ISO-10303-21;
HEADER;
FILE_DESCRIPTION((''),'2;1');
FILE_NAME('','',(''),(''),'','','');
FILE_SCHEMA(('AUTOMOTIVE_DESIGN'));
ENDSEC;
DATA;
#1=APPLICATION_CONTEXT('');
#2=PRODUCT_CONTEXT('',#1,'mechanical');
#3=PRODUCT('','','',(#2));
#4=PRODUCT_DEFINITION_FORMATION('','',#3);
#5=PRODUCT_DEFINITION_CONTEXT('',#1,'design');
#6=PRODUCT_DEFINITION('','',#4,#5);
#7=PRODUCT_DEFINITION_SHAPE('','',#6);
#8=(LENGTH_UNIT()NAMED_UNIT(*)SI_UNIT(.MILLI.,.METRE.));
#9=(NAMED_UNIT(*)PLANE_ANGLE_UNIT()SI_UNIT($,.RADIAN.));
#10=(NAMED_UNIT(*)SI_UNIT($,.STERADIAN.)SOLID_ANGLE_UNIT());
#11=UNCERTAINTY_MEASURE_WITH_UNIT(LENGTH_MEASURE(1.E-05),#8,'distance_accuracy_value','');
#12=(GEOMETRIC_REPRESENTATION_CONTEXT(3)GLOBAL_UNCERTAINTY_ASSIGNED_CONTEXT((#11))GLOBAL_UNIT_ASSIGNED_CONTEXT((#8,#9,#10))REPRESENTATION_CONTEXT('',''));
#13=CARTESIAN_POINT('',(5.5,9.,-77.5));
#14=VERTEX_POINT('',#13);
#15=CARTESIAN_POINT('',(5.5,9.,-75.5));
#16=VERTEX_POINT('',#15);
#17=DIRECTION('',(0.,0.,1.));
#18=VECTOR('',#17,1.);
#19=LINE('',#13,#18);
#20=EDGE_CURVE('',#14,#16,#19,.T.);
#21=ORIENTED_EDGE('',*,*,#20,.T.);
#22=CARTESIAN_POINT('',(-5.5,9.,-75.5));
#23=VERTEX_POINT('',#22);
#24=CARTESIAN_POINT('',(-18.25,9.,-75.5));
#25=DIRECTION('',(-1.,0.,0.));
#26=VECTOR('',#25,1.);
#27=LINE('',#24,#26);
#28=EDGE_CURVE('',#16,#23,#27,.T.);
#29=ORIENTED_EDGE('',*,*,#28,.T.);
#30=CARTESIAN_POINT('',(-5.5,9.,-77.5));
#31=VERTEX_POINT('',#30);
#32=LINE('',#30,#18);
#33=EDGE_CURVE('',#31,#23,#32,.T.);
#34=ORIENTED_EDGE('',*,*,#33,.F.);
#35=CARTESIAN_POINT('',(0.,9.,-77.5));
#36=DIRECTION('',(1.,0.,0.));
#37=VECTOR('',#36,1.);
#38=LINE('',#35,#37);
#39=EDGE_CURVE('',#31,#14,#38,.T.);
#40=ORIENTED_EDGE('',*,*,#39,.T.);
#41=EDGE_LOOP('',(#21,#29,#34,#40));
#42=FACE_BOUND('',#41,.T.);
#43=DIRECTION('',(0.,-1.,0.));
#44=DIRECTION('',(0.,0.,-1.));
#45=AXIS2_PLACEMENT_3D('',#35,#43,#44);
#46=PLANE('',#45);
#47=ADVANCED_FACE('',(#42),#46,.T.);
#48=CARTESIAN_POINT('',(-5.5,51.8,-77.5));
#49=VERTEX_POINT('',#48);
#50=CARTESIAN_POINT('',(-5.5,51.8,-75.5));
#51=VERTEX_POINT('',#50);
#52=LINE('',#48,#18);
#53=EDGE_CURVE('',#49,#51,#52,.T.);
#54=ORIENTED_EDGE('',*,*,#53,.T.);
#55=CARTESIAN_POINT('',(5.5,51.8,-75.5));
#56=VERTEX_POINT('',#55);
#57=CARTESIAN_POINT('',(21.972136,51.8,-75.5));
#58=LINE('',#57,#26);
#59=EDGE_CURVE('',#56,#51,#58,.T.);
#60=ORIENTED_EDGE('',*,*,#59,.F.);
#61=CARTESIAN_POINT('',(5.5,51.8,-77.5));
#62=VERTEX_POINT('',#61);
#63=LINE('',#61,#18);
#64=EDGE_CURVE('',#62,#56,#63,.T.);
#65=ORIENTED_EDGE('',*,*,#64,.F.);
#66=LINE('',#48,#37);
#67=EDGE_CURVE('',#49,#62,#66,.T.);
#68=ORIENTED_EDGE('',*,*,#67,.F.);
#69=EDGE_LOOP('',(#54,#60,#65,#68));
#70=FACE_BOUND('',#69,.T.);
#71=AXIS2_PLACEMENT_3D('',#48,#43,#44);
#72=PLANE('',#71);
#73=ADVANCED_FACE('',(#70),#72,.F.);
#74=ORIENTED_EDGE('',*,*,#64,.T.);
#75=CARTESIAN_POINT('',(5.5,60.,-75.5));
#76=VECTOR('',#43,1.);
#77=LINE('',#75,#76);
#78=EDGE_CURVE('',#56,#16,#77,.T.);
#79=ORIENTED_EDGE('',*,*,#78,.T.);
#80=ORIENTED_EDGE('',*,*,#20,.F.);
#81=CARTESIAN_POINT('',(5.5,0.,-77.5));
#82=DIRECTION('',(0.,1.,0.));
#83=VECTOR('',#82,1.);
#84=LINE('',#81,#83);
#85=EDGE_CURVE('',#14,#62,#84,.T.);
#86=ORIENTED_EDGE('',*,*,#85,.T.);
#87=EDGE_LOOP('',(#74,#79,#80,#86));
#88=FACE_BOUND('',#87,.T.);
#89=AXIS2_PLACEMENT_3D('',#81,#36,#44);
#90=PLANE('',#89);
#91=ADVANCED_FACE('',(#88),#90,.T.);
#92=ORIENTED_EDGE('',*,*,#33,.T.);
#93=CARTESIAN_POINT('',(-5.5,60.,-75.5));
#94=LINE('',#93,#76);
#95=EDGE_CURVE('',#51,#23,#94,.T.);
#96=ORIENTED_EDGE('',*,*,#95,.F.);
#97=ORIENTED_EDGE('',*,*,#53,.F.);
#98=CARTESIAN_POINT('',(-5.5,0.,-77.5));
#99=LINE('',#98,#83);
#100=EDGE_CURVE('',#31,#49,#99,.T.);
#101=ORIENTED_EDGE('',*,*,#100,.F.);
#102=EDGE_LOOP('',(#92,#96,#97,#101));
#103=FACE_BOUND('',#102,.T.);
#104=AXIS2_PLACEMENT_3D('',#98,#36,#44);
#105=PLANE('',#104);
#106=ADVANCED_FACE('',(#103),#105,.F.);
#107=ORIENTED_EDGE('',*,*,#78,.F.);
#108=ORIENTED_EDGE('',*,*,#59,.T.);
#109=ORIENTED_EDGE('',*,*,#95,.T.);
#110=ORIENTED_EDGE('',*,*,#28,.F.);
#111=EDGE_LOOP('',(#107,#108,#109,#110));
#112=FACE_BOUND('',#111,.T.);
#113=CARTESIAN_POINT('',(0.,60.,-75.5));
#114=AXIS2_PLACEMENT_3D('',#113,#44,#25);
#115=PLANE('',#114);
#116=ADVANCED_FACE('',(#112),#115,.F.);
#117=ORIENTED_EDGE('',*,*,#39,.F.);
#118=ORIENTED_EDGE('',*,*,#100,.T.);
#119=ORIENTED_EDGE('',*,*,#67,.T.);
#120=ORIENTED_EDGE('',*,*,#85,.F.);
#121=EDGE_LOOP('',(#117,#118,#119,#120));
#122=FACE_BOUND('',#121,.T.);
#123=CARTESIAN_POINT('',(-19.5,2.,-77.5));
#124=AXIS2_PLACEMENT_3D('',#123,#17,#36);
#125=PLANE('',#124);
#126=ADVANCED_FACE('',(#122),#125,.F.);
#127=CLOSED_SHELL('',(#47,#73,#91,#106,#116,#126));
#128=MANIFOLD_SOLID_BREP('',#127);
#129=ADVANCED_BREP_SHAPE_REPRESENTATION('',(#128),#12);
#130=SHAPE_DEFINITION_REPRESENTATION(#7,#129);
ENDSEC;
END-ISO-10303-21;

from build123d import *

# Parameters (mm, degrees)
SKETCH1_W                       = 39
SKETCH1_H                       = 155
BOSS_EXTRUDE1_DEPTH             = 2
BOSS_EXTRUDE2_DEPTH             = 58
SKETCH3_W                       = 2
SKETCH3_H                       = 2
BOSS_EXTRUDE3_DEPTH             = 58
SKETCH4_W                       = 2
SKETCH4_H                       = 2
BOSS_EXTRUDE4_DEPTH             = 151
SKETCH6_W                       = 35
SKETCH6_H                       = 2.2
CUT_EXTRUDE1_DEPTH              = 166.496978824
SKETCH7_W                       = 35
SKETCH7_H                       = 2.2
CUT_EXTRUDE2_DEPTH              = 99.744620107
SKETCH5_W                       = 31
SKETCH5_H                       = 2
BOSS_EXTRUDE5_DEPTH             = 2
BOSS_EXTRUDE6_REACH             = 101.932
SKETCH8_W                       = 2
SKETCH8_H                       = 2
BOSS_EXTRUDE6_DIRECTION_2_REACH = 101.932
SKETCH10_W                      = 2
SKETCH10_H                      = 2.2
SKETCH10_W_2                    = 2.2
SKETCH10_H_2                    = 2
BOSS_EXTRUDE8_DEPTH             = 2
SKETCH11_W                      = 2
SKETCH11_H                      = 2.2
SKETCH11_W_2                    = 2.2
SKETCH11_H_2                    = 2
BOSS_EXTRUDE9_DEPTH             = 2
FILLET2_R                       = 2.5
SKETCH14_W                      = 36.5
SKETCH14_H                      = 7.75
BOSS_EXTRUDE10_DEPTH            = 2
SKETCH13_W                      = 31
SKETCH13_H                      = 3
CUT_EXTRUDE4_DEPTH              = 2
FILLET3_R                       = 2
FILLET4_R                       = 0.5
SKETCH15_R                      = 5.1
CUT_EXTRUDE5_DEPTH              = 100.932477203
SKETCH16_R                      = 7.1
BOSS_EXTRUDE11_DEPTH            = 1
FILLET5_R                       = 0.5
FILLET7_R                       = 0.5
CUT_EXTRUDE6_DEPTH              = 100.932477263
CUT_EXTRUDE6_DEPTH_BACK         = 100.932477263
SKETCH18_W                      = 9
SKETCH18_H                      = 51
CUT_EXTRUDE7_DEPTH              = 100.078251902
CUT_EXTRUDE8_DEPTH              = 61.284741021
CUT_EXTRUDE8_DEPTH_BACK         = 61.284741021
SKETCH19_W                      = 11
SKETCH19_H                      = 8.2


with BuildPart() as part:
    # Sketch1 → Boss-Extrude1 (new body)
    with BuildSketch(Plane(origin=(0, 0, 0), x_dir=(1, 0, 0), z_dir=(0, 1, 0))):
        Rectangle(SKETCH1_W, SKETCH1_H)
    extrude(amount=BOSS_EXTRUDE1_DEPTH)

    # Sketch2 → Boss-Extrude2 (add)
    with BuildSketch(Plane(origin=(0, 2, 0), x_dir=(1, 0, 0), z_dir=(0, 1, 0))):
        Polygon((-17.5, -77.5), (-17.5, -75.5), (-17.5, 75.5), (17.5, 75.5), (17.5, -75.5), (17.5, -77.5), (19.5, -77.5), (19.5, 77.5), (-19.5, 77.5), (-19.5, -77.5), align=None)
    extrude(amount=BOSS_EXTRUDE2_DEPTH)

    # Sketch3 → Boss-Extrude3 (add)
    with BuildSketch(Plane(origin=(0, 2, 0), x_dir=(1, 0, 0), z_dir=(0, 1, 0))):
        with Locations((-16.5, -76.5)):
            Rectangle(SKETCH3_W, SKETCH3_H)
        with Locations((-16.5, -72.3)):
            Rectangle(SKETCH3_W, SKETCH3_H)
        with Locations((16.5, -76.5)):
            Rectangle(SKETCH3_W, SKETCH3_H)
        with Locations((16.5, -72.3)):
            Rectangle(SKETCH3_W, SKETCH3_H)
    extrude(amount=BOSS_EXTRUDE3_DEPTH)

    # Sketch4 → Boss-Extrude4 (add)
    with BuildSketch(Plane.XY.offset(-75.5)):
        with Locations((-16.5, 59)):
            Rectangle(SKETCH4_W, SKETCH4_H)
        Polygon((-15.5, 53.8), (-17.5, 51.8), (-17.5, 55.8), (-15.5, 55.8), align=None)
        Polygon((15.5, 55.8), (17.5, 55.8), (17.5, 51.8), (15.5, 53.8), align=None)
        with Locations((16.5, 59)):
            Rectangle(SKETCH4_W, SKETCH4_H)
    extrude(amount=BOSS_EXTRUDE4_DEPTH)

    # Sketch6 → Cut-Extrude1 (cut, through all)
    with BuildSketch(Plane.XY.offset(-75.5)):
        with Locations((0, 56.9)):
            Rectangle(SKETCH6_W, SKETCH6_H)
    extrude(amount=CUT_EXTRUDE1_DEPTH, mode=Mode.SUBTRACT)

    # Sketch7 → Cut-Extrude2 (cut, through all)
    with BuildSketch(Plane(origin=(0, 2, 0), x_dir=(1, 0, 0), z_dir=(0, 1, 0))):
        with Locations((0, -74.4)):
            Rectangle(SKETCH7_W, SKETCH7_H)
    extrude(amount=CUT_EXTRUDE2_DEPTH, mode=Mode.SUBTRACT)

    # Sketch5 → Boss-Extrude5 (add)
    with BuildSketch(Plane(origin=(0, 2, 0), x_dir=(1, 0, 0), z_dir=(0, 1, 0))):
        with Locations((0, -76.5)):
            Rectangle(SKETCH5_W, SKETCH5_H)
        with Locations((0, -72.3)):
            Rectangle(SKETCH5_W, SKETCH5_H)
    extrude(amount=BOSS_EXTRUDE5_DEPTH)

    # Boss-Extrude6: up to this face of the body (flat: up to its plane)
    boss_extrude6_end = Plane(part.part.faces().sort_by_distance((17.5, 26.9, -2.1))[0])
    # Sketch8 → Boss-Extrude6 (add, up to the picked face)
    with BuildSketch(Plane(origin=(0, 0, 0), x_dir=(0, 0, -1), z_dir=(1, 0, 0)), mode=Mode.PRIVATE) as boss_extrude6_sk1:
        with Locations((74.5, 59)):
            Rectangle(SKETCH8_W, SKETCH8_H)
    boss_extrude6_tool1 = split(extrude(boss_extrude6_sk1.sketch, amount=BOSS_EXTRUDE6_REACH, mode=Mode.PRIVATE), bisect_by=boss_extrude6_end, keep=Keep.BOTH, mode=Mode.PRIVATE)
    # Sketch8 → Boss-Extrude6 (add, up to the picked face)
    with BuildSketch(Plane(origin=(0, 0, 0), x_dir=(0, 0, -1), z_dir=(1, 0, 0)), mode=Mode.PRIVATE) as boss_extrude6_sk2:
        Polygon((75.5, 55.8), (73.5, 55.8), (73.5, 53.8), (75.5, 51.8), align=None)
    boss_extrude6_tool2 = split(extrude(boss_extrude6_sk2.sketch, amount=BOSS_EXTRUDE6_REACH, mode=Mode.PRIVATE), bisect_by=boss_extrude6_end, keep=Keep.BOTH, mode=Mode.PRIVATE)
    add(boss_extrude6_tool1.solids().sort_by(Axis((0, 59, -74.5), (1, 0, 0)))[0])
    add(boss_extrude6_tool2.solids().sort_by(Axis((0, 54.244444, -74.611111), (1, 0, 0)))[0])

    # Boss-Extrude6 direction 2: up to this face of the body (flat: up to its plane)
    boss_extrude6_direction_2_end = Plane(part.part.faces().sort_by_distance((-17.5, 26.9, -2.1))[0])
    # Sketch8 → Boss-Extrude6 direction 2 (add, up to the picked face)
    with BuildSketch(Plane(origin=(0, 0, 0), x_dir=(0, 0, -1), z_dir=(1, 0, 0)), mode=Mode.PRIVATE) as boss_extrude6_direction_2_sk1:
        with Locations((74.5, 59)):
            Rectangle(SKETCH8_W, SKETCH8_H)
    boss_extrude6_direction_2_tool1 = split(extrude(boss_extrude6_direction_2_sk1.sketch, amount=-BOSS_EXTRUDE6_DIRECTION_2_REACH, mode=Mode.PRIVATE), bisect_by=boss_extrude6_direction_2_end, keep=Keep.BOTH, mode=Mode.PRIVATE)
    # Sketch8 → Boss-Extrude6 direction 2 (add, up to the picked face)
    with BuildSketch(Plane(origin=(0, 0, 0), x_dir=(0, 0, -1), z_dir=(1, 0, 0)), mode=Mode.PRIVATE) as boss_extrude6_direction_2_sk2:
        Polygon((75.5, 55.8), (73.5, 55.8), (73.5, 53.8), (75.5, 51.8), align=None)
    boss_extrude6_direction_2_tool2 = split(extrude(boss_extrude6_direction_2_sk2.sketch, amount=-BOSS_EXTRUDE6_DIRECTION_2_REACH, mode=Mode.PRIVATE), bisect_by=boss_extrude6_direction_2_end, keep=Keep.BOTH, mode=Mode.PRIVATE)
    add(boss_extrude6_direction_2_tool1.solids().sort_by(Axis((0, 59, -74.5), (-1, 0, 0)))[0])
    add(boss_extrude6_direction_2_tool2.solids().sort_by(Axis((0, 54.244444, -74.611111), (-1, 0, 0)))[0])

    # Sketch10 → Boss-Extrude8 (add)
    with BuildSketch(Plane(origin=(-17.5, 0, 0), x_dir=(0, 0, -1), z_dir=(1, 0, 0))):
        with Locations((-76.5, 56.9)):
            Rectangle(SKETCH10_W, SKETCH10_H)
        with Locations((-74.4, 59)):
            Rectangle(SKETCH10_W_2, SKETCH10_H_2)
    extrude(amount=BOSS_EXTRUDE8_DEPTH)

    # Sketch11 → Boss-Extrude9 (add)
    with BuildSketch(Plane.ZY.offset(-17.5)):
        with Locations((76.5, 56.9)):
            Rectangle(SKETCH11_W, SKETCH11_H)
        with Locations((74.4, 59)):
            Rectangle(SKETCH11_W_2, SKETCH11_H_2)
    extrude(amount=BOSS_EXTRUDE9_DEPTH)

    # Fillet2
    fillet2_edges = [part.edges().sort_by_distance(p)[0] for p in [
        (-17.5, 26.9, 71.3),
        (17.5, 26.9, 71.3),
        (19.5, 30, 77.5),
        (-19.5, 30, 77.5),
        (-19.5, 30, -77.5),
        (-17.5, 26.9, -75.5),
        (17.5, 26.9, -75.5),
        (19.5, 30, -77.5),
        (19.5, 60, 0),
        (-19.5, 60, 0),
        (19.5, 0, 0),
        (-19.5, 0, 0),
        (0, 60, -77.5),
        (0, 0, 77.5),
        (0, 0, -77.5),
        (-17.5, 60, 77.5),
        (17.5, 60, 77.5),
    ]]
    fillet(fillet2_edges, radius=FILLET2_R)

    # Sketch14 → Boss-Extrude10 (add)
    with BuildSketch(Plane.XY.offset(-75.5)):
        with Locations((0, 5.125)):
            Rectangle(SKETCH14_W, SKETCH14_H)
    extrude(amount=BOSS_EXTRUDE10_DEPTH)

    # Sketch13 → Cut-Extrude4 (cut)
    with BuildSketch(Plane(origin=(0, 0, -77.5), x_dir=(-1, 0, 0), z_dir=(0, 0, -1))):
        with Locations((0, 5.5)):
            Rectangle(SKETCH13_W, SKETCH13_H)
    extrude(amount=-CUT_EXTRUDE4_DEPTH, mode=Mode.SUBTRACT)

    # Fillet3
    fillet3_edges = [part.edges().sort_by_distance(p)[0] for p in [
        (0, 9, -73.5),
    ]]
    fillet(fillet3_edges, radius=FILLET3_R - 0.0001)  # a hair under: the kernel refuses the full size

    # Fillet4
    fillet4_edges = [part.edges().sort_by_distance(p)[0] for p in [
        (15.5, 5.5, -75.5),
        (15.5, 4, -76.5),
        (0, 7, -75.5),
        (15.5, 7, -76.5),
        (-15.5, 5.5, -75.5),
        (-15.5, 7, -76.5),
        (0, 4, -75.5),
        (-15.5, 4, -76.5),
        (15.5, 5.5, -77.5),
        (0, 4, -77.5),
        (-15.5, 5.5, -77.5),
        (0, 7, -77.5),
    ]]
    fillet(fillet4_edges, radius=FILLET4_R)

    # Sketch15 → Cut-Extrude5 (cut, through all)
    with BuildSketch(Plane.XZ):
        with Locations(Location((0, 38.75, 0), (0, 0, 270))):
            Circle(SKETCH15_R)
        with Locations(Location((0, -38.75, 0), (0, 0, 270))):
            Circle(SKETCH15_R)
    extrude(amount=-CUT_EXTRUDE5_DEPTH, mode=Mode.SUBTRACT)

    # Sketch16 → Boss-Extrude11 (add)
    with BuildSketch(Plane(origin=(0, 2, 0), x_dir=(1, 0, 0), z_dir=(0, 1, 0))):
        with Locations(Location((0, 38.75, 0), (0, 0, 270))):
            Circle(SKETCH16_R)
        with Locations(Location((0, -38.75, 0), (0, 0, 270))):
            Circle(SKETCH16_R)
    extrude(amount=BOSS_EXTRUDE11_DEPTH)

    # Fillet5
    fillet5_edges = [part.edges().sort_by_distance(p)[0] for p in [
        (0, 2, -45.85),
        (0, 3, -45.85),
        (0, 2, 31.65),
        (0, 3, 31.65),
    ]]
    fillet(fillet5_edges, radius=FILLET5_R - 0.0001)  # a hair under: the kernel refuses the full size

    # Fillet7
    fillet7_edges = [part.edges().sort_by_distance(p)[0] for p in [
        (15.5, 60, 0.75),
        (0, 4, 77.5),
        (0, 60, -73.5),
        (-15.5, 60, 0.75),
        (-15.5, 30.75, 77.5),
        (-15.5, 59.267766953, 76.767766953),
        (15.5, 30.75, 77.5),
        (15.5, 59.267766953, 76.767766953),
    ]]
    fillet(fillet7_edges, radius=FILLET7_R)

    # Sketch17 → Cut-Extrude6 (cut, two sides: drawn at the far end of the back side and taken through both)
    with BuildSketch(Plane.XY.offset(-CUT_EXTRUDE6_DEPTH_BACK)):
        Polygon((19.5, 60), (14.5, 60), (14.5, 9), (0, 9), (0, 0), (19.5, 0), align=None)
        Polygon((-14.5, 60), (-19.5, 60), (-19.5, 0), (0, 0), (0, 9), (-14.5, 9), align=None)
    extrude(amount=CUT_EXTRUDE6_DEPTH + CUT_EXTRUDE6_DEPTH_BACK, mode=Mode.SUBTRACT)

    # Sketch18 → Cut-Extrude7 (cut, through all)
    with BuildSketch(Plane.XY):
        with Locations((-10, 34.5)):
            Rectangle(SKETCH18_W, SKETCH18_H)
        with Locations((10, 34.5)):
            Rectangle(SKETCH18_W, SKETCH18_H)
    extrude(amount=-CUT_EXTRUDE7_DEPTH, mode=Mode.SUBTRACT)

    # Sketch19 → Cut-Extrude8 (cut, two sides: drawn at the far end of the back side and taken through both)
    with BuildSketch(Plane.XY.offset(-75.5).offset(-CUT_EXTRUDE8_DEPTH_BACK)):
        with Locations((0, 55.9)):
            Rectangle(SKETCH19_W, SKETCH19_H)
    extrude(amount=CUT_EXTRUDE8_DEPTH + CUT_EXTRUDE8_DEPTH_BACK, mode=Mode.SUBTRACT)


solid = part.part
